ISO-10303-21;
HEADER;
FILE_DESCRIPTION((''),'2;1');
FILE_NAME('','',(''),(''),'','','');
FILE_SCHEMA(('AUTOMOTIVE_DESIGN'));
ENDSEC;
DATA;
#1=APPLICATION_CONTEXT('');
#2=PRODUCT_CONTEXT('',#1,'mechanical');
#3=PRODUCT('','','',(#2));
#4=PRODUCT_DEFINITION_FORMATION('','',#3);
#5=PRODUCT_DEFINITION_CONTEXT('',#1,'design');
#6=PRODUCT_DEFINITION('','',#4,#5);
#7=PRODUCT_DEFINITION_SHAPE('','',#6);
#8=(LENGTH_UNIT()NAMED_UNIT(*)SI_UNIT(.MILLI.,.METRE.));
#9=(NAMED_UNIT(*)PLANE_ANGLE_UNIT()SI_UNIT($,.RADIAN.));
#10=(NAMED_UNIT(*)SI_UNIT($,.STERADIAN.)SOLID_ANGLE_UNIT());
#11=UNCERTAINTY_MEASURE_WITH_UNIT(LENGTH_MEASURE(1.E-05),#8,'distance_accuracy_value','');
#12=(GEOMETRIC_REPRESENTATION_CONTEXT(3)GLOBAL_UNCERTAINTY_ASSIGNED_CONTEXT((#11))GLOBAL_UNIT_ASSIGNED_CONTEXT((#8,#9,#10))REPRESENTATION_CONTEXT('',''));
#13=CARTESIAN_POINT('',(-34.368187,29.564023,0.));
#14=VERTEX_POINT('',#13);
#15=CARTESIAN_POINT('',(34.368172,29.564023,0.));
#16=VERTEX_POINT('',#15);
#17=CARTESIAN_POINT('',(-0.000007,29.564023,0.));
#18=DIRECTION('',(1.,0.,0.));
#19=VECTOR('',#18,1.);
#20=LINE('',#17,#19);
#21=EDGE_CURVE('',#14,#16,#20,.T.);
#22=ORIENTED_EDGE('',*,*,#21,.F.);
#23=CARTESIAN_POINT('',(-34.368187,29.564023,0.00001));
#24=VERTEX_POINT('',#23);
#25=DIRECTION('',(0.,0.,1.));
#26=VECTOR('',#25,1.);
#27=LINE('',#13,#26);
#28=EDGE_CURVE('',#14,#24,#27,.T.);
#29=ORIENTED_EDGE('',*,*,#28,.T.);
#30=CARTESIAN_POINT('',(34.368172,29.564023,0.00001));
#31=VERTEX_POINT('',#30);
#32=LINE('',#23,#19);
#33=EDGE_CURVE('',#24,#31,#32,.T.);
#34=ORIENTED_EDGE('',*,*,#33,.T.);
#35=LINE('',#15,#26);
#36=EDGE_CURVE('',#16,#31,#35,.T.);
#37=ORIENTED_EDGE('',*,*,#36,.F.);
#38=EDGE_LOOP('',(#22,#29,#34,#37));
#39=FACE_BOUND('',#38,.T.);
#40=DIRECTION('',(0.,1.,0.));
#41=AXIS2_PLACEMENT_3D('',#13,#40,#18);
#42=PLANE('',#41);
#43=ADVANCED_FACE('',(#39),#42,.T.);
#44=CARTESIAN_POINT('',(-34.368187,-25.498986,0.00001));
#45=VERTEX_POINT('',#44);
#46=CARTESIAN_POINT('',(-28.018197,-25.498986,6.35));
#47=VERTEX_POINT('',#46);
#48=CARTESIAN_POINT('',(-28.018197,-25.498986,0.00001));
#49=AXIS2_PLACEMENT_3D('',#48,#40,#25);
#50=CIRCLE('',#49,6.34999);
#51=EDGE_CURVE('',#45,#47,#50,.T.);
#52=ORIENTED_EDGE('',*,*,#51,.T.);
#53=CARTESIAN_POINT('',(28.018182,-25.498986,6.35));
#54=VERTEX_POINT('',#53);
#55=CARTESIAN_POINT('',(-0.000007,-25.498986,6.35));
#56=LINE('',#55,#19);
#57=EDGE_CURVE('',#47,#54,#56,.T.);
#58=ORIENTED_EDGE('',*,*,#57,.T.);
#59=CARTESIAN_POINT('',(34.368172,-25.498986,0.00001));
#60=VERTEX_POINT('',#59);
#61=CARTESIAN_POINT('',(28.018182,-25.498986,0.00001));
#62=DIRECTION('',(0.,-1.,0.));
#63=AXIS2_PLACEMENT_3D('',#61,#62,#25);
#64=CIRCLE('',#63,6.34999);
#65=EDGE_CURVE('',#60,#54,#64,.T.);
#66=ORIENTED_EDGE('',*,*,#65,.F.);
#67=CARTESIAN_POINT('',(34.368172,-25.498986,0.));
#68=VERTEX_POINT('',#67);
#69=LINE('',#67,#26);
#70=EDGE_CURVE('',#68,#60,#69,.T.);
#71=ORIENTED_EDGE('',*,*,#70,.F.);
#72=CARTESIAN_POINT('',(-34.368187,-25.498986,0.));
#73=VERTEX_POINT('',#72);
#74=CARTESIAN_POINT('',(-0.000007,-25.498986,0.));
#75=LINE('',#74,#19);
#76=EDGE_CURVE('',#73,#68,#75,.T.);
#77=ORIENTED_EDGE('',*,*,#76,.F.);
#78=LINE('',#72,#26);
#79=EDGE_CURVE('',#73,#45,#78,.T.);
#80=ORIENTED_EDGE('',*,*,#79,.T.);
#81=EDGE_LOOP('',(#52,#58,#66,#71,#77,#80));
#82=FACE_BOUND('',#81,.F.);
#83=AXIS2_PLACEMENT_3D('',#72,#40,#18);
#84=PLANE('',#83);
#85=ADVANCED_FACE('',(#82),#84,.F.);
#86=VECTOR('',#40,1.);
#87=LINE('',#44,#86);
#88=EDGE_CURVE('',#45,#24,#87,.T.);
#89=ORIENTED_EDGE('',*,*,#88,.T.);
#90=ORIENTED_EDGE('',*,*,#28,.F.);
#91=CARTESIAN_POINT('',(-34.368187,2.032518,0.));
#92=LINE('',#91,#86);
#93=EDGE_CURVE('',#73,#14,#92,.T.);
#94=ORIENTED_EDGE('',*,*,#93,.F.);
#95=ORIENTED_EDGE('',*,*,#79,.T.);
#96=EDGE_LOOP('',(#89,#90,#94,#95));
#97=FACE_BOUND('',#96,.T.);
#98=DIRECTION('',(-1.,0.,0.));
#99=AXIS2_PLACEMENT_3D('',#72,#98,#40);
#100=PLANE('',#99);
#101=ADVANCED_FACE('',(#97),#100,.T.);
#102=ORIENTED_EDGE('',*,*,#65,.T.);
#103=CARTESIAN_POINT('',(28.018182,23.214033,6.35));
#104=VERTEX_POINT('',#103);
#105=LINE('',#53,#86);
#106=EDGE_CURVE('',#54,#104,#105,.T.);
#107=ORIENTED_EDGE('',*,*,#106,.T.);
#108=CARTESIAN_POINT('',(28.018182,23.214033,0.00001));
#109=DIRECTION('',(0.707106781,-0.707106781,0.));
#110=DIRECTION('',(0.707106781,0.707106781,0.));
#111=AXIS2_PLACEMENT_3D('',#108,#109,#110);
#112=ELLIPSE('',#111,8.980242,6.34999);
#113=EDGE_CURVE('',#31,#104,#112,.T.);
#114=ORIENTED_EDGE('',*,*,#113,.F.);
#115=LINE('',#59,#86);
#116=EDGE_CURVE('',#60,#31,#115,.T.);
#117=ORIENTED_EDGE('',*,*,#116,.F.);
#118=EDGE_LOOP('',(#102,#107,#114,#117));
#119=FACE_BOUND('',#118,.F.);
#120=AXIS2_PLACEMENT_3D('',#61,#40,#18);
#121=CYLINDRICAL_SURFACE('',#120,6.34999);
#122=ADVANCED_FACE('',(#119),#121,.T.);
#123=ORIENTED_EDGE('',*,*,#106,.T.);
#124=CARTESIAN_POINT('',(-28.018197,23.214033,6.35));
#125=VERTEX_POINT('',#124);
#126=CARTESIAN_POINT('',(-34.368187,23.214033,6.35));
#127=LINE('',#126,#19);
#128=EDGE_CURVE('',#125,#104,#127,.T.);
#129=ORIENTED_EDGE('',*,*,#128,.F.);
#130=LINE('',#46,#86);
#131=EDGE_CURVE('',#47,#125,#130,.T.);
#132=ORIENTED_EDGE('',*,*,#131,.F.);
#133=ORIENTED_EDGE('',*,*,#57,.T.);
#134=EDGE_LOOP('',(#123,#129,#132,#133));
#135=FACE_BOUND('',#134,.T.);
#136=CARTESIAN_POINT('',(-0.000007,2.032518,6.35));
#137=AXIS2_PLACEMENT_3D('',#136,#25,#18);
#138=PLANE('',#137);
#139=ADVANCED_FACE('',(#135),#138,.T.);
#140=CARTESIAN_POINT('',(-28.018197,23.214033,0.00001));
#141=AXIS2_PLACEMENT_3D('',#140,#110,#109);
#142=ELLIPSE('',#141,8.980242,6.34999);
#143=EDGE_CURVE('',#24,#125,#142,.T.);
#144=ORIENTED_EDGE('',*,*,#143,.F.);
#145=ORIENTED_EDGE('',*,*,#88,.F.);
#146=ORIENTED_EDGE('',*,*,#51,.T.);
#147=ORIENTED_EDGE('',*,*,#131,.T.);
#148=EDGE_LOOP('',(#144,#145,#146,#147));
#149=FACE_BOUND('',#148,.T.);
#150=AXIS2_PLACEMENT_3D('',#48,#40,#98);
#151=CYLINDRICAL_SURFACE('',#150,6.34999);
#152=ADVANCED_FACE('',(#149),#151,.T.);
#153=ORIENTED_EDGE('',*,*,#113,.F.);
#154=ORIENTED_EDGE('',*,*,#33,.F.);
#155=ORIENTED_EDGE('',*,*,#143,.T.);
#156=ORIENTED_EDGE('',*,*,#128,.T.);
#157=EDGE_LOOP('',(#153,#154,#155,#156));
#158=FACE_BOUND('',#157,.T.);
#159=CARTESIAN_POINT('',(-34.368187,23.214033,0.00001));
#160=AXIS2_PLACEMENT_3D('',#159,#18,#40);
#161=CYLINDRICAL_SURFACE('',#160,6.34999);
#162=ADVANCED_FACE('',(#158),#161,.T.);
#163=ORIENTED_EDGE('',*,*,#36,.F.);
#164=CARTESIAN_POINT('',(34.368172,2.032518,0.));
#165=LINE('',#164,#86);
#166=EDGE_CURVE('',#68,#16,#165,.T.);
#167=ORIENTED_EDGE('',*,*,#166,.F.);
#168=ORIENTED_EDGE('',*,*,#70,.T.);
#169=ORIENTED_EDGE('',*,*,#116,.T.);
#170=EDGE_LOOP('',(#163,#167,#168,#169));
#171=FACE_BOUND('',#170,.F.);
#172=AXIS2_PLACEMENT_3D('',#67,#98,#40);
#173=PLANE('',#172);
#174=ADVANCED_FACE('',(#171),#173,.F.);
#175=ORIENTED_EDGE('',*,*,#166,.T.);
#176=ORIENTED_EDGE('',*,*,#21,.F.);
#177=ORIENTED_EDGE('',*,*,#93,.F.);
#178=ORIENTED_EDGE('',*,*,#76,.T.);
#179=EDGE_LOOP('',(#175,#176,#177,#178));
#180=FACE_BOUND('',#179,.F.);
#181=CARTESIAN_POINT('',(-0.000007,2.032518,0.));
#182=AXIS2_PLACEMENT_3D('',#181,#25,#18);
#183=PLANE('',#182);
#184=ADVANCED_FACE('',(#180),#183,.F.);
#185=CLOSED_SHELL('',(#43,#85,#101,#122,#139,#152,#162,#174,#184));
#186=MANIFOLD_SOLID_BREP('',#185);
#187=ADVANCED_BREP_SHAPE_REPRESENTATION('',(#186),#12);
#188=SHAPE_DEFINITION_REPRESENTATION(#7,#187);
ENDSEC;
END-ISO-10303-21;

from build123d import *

# Parameters (mm, degrees)
F0_W     = 68.736359477
F0_H     = 55.0630092621
F1_DEPTH = 6.35
F2_R     = 6.34999


# Not quite as in the source:
# - a fillet or chamfer is up to 0.001 mm smaller than in the source, because OpenCascade refuses the exact size


with BuildPart() as f1:
    # F0 (on Top) → F1 (new body)
    with BuildSketch(Plane.XY):
        with Locations((-7.4506e-06, 2.0325183868)):
            Rectangle(F0_W, F0_H)
    extrude(amount=F1_DEPTH)

    # F2 (radius 6.35 in the source; OpenCascade refuses exactly that, so slightly less here)
    f2_edges = [f1.edges().sort_by_distance(p)[0] for p in [
        (-7e-06, 29.564023, 6.35),
        (34.368172, 2.032518, 6.35),
        (-34.368187, 2.032518, 6.35),
    ]]
    fillet(f2_edges, radius=F2_R)


solid = f1.part
